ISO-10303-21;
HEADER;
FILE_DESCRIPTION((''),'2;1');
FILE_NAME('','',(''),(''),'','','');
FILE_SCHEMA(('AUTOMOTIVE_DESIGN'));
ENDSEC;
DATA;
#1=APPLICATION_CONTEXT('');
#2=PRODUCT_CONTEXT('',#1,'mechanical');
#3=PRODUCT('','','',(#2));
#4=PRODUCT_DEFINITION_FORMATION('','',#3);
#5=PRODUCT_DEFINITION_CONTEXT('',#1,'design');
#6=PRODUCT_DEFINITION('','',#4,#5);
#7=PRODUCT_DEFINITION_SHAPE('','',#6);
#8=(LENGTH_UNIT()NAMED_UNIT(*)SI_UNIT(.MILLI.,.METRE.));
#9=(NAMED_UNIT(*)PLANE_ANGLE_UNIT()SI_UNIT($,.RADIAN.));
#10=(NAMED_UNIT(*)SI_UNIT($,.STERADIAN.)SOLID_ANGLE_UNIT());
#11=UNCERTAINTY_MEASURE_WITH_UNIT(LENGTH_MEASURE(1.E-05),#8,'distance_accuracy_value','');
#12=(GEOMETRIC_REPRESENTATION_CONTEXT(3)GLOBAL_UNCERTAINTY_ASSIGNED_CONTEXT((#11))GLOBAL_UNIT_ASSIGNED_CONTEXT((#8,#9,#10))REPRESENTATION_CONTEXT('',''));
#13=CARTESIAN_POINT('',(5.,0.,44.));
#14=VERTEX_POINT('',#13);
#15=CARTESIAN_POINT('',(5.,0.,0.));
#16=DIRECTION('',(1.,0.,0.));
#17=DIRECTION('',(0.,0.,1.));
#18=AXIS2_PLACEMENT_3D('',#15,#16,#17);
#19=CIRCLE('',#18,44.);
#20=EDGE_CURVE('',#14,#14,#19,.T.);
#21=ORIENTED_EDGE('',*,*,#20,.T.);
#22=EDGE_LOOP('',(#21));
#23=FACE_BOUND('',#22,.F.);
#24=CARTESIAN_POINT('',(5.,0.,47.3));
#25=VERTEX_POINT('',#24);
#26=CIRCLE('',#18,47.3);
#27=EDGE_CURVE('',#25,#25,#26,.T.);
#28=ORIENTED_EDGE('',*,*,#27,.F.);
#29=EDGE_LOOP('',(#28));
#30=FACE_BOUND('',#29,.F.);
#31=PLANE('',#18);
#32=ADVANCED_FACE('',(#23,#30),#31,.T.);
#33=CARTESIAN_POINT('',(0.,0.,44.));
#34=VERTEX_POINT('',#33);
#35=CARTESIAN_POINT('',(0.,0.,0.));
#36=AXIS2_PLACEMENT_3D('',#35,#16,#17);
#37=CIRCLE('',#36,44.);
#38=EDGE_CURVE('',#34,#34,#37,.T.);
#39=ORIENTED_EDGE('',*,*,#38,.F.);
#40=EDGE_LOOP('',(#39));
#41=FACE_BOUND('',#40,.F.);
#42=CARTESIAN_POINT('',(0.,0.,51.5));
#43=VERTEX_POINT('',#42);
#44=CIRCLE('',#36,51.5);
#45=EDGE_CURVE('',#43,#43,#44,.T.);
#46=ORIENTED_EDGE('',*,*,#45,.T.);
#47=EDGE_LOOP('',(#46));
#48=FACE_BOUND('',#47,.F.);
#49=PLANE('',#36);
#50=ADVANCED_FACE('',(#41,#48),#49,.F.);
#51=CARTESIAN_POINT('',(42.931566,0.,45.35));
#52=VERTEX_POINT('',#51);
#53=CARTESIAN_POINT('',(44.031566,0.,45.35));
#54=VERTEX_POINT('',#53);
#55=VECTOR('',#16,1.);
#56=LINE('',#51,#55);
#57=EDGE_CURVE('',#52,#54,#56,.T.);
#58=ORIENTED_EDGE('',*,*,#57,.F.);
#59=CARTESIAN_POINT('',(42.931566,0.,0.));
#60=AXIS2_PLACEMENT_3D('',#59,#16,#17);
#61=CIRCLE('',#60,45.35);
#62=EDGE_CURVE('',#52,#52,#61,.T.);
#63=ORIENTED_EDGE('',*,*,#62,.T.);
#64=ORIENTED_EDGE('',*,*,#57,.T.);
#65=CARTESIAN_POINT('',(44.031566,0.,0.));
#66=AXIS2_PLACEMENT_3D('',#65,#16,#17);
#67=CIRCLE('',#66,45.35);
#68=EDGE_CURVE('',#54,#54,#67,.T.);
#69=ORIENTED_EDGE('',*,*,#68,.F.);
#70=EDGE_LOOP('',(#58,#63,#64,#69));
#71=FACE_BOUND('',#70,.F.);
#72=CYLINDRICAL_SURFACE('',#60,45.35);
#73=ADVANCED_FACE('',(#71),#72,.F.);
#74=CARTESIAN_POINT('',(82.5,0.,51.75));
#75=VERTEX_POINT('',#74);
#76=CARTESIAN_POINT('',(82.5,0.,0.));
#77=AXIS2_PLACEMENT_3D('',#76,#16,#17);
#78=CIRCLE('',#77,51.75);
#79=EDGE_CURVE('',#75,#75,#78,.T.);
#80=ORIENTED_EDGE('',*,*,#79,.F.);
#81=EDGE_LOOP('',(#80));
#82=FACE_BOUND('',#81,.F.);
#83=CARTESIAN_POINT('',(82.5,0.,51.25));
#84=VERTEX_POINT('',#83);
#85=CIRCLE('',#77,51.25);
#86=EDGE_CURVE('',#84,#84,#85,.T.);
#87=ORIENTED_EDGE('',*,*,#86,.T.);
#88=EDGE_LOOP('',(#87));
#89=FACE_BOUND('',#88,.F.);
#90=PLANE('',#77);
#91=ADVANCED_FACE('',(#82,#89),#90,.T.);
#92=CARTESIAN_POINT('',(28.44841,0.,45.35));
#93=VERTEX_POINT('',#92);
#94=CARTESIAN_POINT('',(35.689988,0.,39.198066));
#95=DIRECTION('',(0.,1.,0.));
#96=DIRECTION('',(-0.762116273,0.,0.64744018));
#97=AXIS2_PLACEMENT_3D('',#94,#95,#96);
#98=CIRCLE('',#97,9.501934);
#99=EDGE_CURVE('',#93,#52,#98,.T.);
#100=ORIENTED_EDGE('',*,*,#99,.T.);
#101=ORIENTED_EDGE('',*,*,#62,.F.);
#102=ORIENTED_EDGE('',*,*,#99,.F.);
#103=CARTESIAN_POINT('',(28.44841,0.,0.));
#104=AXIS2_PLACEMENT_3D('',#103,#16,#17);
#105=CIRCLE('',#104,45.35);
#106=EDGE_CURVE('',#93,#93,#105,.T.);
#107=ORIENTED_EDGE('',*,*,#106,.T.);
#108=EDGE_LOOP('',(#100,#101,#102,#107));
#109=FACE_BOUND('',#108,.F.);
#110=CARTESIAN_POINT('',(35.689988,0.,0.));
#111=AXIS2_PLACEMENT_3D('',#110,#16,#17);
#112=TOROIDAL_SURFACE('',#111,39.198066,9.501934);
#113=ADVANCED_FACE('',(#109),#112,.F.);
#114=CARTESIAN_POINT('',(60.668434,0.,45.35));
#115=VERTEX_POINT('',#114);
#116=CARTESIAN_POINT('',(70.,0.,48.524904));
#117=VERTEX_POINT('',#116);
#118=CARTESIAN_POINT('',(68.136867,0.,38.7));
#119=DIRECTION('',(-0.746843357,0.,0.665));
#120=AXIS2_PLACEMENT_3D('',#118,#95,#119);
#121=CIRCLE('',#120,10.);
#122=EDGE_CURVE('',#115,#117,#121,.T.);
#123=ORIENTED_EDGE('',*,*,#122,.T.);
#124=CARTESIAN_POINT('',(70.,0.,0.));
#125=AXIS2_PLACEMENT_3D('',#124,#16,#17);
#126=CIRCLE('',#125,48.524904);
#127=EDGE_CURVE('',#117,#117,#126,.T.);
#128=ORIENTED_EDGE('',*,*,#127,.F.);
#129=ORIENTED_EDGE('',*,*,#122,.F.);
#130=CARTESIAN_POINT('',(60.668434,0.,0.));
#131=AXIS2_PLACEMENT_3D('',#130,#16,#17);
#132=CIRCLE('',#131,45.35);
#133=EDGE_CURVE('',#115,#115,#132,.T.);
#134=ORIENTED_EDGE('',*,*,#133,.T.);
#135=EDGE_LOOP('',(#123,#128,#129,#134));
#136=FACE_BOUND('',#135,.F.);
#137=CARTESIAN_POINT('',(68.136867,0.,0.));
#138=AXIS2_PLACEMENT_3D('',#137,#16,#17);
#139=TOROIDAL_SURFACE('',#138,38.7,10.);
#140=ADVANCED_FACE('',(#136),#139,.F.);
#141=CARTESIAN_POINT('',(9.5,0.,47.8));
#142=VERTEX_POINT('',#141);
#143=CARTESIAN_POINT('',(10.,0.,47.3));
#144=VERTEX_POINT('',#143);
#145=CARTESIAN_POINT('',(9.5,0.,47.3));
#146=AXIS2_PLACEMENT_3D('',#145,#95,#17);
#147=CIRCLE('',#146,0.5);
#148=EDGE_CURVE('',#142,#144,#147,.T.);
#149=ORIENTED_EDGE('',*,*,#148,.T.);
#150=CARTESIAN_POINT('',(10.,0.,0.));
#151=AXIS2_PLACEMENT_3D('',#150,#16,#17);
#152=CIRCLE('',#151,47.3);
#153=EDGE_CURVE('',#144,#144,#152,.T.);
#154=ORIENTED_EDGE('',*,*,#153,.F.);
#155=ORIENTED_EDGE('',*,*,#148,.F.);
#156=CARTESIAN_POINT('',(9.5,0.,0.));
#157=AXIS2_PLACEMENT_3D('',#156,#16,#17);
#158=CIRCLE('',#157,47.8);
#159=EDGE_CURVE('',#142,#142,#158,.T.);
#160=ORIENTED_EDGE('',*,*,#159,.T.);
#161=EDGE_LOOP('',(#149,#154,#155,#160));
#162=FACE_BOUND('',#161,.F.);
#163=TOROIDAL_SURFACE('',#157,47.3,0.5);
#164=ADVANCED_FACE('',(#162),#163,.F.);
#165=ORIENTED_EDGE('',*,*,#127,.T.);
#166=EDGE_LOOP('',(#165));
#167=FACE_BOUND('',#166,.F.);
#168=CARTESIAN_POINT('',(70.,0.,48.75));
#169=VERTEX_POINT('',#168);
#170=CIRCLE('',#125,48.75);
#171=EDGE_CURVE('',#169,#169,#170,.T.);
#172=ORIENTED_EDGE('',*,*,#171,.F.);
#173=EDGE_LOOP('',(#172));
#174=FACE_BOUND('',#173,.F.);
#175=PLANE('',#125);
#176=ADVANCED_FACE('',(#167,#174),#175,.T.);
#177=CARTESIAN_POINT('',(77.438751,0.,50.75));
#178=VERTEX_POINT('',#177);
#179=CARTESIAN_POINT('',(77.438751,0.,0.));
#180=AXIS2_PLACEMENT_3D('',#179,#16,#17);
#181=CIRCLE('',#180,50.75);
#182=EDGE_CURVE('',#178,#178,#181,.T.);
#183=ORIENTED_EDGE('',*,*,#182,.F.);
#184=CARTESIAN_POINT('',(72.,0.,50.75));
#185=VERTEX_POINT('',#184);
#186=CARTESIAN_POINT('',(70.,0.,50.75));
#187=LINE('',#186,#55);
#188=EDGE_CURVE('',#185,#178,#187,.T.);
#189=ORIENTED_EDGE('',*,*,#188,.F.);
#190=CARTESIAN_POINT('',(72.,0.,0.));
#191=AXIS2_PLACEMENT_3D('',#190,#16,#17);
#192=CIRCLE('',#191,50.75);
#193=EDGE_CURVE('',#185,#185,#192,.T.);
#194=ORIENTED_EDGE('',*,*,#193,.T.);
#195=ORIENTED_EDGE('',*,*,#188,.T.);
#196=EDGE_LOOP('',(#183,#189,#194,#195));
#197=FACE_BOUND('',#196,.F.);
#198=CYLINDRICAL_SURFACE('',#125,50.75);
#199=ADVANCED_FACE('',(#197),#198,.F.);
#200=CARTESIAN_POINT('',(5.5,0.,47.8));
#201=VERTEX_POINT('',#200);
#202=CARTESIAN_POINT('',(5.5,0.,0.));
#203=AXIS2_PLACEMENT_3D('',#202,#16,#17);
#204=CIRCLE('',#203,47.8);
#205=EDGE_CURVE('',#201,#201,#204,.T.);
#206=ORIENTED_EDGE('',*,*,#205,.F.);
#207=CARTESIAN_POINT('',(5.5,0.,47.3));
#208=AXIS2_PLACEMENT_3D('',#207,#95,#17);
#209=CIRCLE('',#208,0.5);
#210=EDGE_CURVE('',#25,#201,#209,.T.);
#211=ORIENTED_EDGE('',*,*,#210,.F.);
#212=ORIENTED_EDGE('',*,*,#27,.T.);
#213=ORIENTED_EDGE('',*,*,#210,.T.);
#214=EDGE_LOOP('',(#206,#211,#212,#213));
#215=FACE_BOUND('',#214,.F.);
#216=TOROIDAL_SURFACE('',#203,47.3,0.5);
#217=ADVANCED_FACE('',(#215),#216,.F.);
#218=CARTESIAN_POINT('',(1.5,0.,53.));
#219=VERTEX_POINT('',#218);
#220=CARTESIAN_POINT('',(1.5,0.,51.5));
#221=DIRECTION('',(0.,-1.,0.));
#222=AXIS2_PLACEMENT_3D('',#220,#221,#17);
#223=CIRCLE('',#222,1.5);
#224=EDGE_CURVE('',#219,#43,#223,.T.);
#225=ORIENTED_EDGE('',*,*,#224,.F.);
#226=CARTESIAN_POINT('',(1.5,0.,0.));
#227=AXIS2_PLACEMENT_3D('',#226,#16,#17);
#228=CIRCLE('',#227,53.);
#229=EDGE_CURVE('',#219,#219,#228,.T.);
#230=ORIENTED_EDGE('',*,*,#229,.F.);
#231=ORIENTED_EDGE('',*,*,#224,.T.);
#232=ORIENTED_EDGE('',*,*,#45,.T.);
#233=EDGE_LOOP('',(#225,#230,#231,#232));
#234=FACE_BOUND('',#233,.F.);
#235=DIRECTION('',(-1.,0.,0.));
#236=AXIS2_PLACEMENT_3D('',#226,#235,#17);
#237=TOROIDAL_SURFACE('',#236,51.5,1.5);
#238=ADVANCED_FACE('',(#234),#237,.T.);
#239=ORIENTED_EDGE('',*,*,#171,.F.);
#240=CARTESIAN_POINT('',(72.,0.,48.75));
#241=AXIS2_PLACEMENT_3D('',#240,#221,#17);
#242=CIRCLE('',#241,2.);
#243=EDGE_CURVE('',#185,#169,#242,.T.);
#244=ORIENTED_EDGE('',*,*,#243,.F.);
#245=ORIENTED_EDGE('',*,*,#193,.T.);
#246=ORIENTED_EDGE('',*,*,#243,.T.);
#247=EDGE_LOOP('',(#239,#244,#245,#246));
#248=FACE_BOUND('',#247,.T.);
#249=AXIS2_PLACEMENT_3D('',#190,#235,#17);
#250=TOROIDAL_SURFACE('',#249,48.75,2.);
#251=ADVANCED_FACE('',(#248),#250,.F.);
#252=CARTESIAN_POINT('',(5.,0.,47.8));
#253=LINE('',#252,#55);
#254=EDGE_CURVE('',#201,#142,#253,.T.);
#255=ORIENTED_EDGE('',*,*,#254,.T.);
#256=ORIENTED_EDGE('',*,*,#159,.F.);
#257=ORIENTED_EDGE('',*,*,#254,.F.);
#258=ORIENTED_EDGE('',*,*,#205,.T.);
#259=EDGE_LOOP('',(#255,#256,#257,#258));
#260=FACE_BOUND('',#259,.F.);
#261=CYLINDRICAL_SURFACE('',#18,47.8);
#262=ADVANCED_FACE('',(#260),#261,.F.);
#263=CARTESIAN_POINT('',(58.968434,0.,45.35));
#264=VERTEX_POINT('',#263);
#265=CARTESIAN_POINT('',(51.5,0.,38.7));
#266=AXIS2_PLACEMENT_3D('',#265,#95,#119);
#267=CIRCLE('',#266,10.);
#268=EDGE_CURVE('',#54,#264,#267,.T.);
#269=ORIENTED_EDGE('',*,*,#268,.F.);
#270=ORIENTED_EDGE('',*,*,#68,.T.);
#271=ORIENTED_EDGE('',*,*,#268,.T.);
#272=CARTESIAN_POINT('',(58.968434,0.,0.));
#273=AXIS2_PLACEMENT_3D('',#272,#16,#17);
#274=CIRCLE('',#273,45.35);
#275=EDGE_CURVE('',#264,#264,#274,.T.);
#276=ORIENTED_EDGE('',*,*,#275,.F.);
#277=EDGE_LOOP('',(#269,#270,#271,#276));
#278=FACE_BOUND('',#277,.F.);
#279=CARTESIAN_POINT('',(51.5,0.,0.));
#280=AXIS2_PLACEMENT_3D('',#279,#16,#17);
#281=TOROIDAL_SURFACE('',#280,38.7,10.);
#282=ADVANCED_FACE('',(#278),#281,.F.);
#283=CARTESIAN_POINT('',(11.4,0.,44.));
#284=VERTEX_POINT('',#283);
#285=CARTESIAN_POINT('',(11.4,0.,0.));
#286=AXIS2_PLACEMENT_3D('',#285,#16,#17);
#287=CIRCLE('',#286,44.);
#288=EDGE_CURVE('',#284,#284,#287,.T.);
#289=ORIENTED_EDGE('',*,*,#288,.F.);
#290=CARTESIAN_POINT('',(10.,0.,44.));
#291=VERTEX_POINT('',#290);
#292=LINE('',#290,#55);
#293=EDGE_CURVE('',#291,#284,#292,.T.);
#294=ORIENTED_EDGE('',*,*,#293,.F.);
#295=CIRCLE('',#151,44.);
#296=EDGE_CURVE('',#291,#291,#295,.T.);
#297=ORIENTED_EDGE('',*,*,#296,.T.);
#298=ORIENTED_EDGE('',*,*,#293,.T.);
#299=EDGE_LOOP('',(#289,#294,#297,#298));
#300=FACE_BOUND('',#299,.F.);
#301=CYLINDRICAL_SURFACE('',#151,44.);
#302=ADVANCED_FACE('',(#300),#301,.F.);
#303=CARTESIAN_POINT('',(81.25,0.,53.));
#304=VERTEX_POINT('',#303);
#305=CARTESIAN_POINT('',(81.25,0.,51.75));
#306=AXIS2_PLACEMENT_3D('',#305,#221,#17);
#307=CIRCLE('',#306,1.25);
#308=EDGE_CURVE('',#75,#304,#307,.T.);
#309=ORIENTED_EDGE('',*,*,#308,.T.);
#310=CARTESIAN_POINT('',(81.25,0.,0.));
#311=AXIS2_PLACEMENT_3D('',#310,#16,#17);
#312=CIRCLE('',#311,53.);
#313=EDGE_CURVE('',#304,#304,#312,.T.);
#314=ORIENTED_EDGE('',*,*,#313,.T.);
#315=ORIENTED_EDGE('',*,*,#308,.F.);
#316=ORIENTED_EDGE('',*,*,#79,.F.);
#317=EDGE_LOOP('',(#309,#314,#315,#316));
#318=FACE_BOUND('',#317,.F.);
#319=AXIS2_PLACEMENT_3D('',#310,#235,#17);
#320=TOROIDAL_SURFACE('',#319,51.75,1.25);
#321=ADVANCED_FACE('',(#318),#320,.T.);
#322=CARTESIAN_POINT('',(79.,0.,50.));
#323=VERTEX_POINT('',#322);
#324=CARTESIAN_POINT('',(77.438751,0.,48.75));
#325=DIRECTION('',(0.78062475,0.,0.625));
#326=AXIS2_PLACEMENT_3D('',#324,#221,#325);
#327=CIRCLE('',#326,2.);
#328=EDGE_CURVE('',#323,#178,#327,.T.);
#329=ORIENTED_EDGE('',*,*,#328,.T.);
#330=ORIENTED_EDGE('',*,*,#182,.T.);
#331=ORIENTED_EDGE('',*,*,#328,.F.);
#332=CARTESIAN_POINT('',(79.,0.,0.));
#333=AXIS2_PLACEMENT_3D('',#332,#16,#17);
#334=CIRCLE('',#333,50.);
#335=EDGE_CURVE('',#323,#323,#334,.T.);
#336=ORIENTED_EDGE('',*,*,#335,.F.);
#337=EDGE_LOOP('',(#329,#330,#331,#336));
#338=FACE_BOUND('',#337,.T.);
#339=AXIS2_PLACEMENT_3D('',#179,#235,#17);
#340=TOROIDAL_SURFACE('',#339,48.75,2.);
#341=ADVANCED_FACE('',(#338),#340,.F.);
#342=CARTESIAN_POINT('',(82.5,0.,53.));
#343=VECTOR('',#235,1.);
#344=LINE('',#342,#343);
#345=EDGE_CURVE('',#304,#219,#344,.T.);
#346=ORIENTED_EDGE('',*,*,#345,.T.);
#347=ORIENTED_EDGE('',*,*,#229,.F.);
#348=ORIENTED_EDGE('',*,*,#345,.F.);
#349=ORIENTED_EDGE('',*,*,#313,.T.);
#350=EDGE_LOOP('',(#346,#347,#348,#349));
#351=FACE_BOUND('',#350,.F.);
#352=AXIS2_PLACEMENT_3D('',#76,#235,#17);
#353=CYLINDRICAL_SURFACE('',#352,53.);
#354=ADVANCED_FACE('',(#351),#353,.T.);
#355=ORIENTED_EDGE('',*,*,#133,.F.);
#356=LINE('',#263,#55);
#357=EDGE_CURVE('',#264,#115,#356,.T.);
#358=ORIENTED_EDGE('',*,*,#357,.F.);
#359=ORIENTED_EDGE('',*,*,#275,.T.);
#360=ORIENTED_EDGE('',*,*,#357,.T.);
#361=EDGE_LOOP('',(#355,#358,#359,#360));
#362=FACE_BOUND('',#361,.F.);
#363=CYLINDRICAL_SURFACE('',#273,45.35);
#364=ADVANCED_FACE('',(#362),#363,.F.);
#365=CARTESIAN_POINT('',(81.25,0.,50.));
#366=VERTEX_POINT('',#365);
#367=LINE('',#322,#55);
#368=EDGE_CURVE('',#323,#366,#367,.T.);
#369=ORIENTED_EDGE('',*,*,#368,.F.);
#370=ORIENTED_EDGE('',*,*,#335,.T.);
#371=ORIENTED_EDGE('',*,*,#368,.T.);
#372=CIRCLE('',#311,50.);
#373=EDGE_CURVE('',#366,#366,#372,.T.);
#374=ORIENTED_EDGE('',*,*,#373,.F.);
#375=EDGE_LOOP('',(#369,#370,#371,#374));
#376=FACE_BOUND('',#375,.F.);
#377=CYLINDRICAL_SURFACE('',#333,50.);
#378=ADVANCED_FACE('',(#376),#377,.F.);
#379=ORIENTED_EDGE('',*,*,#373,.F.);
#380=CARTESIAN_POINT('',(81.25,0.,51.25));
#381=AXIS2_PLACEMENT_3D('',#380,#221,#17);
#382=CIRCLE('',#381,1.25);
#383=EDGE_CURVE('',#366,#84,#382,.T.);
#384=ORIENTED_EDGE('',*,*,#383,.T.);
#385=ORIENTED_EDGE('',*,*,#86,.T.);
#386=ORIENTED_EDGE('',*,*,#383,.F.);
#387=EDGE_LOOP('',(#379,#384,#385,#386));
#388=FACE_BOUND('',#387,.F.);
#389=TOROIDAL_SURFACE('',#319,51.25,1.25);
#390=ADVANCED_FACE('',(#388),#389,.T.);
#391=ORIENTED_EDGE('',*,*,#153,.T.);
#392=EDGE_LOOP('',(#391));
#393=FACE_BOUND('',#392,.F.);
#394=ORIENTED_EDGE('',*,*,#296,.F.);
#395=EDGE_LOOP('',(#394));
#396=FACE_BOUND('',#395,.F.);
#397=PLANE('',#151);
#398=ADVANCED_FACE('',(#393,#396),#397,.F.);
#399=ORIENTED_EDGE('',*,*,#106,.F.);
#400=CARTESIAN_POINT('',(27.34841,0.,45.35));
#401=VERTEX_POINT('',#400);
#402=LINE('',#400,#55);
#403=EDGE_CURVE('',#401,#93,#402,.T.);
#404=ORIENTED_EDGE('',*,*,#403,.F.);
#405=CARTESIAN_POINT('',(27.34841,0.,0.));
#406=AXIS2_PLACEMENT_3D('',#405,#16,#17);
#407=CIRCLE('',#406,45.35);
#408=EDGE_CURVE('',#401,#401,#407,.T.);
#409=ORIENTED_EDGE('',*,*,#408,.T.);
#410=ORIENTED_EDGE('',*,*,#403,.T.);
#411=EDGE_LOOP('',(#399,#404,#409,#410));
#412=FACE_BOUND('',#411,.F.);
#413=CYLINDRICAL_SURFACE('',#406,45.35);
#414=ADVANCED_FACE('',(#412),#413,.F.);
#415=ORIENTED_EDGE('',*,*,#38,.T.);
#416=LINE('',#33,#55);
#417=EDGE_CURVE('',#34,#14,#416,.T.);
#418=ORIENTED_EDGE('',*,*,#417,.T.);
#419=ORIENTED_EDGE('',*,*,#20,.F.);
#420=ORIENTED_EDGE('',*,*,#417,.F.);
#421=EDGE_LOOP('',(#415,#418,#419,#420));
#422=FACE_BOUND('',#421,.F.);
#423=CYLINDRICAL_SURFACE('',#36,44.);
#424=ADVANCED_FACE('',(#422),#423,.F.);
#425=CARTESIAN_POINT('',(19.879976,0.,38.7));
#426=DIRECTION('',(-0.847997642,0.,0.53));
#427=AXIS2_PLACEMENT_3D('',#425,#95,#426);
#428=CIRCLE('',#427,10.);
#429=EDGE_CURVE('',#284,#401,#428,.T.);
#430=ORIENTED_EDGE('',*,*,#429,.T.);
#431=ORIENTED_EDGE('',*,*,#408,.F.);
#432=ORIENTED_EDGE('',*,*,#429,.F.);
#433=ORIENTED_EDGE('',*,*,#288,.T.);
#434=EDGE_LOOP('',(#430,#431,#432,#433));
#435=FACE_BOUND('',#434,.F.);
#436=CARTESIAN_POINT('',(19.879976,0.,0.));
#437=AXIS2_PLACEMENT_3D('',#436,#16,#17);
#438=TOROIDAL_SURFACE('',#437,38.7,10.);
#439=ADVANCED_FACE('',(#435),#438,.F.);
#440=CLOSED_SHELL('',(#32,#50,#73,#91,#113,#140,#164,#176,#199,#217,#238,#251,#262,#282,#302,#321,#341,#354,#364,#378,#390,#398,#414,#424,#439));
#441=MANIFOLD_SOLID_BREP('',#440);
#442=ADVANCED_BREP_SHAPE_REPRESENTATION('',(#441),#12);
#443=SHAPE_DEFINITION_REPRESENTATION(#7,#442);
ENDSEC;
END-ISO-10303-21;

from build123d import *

# Parameters (mm, degrees)
F2_R = 0.5
F4_R = 1.25
F5_R = 1.5


# Not quite as in the source:
# - a fillet or chamfer that OpenCascade refuses, or shapes differently, is made with other operations: its cross-section is extruded or revolved along the edge and cut away or added


with BuildPart() as f1:
    # F0 (on Front) → F1 (revolve)
    with BuildSketch(Plane.XZ):
        with BuildLine():
            Line((82.5, 50), (82.5, 53))
            Line((82.5, 53), (0, 53))
            Line((0, 53), (0, 44))
            Line((0, 44), (5, 44))
            Line((5, 44), (5, 47.8))
            Line((5, 47.8), (10, 47.8))
            Line((10, 47.8), (10, 44))
            Line((10, 44), (11.4, 44))
            ThreePointArc((11.4, 44), (19.0365134749, 48.6643650208), (27.3484099858, 45.35))
            Line((27.3484099858, 45.35), (28.4484099858, 45.35))
            ThreePointArc((28.4484099858, 45.35), (35.6899882075, 48.7), (42.9315664293, 45.35))
            Line((42.9315664293, 45.35), (44.0315664293, 45.35))
            ThreePointArc((44.0315664293, 45.35), (51.5, 48.7), (58.9684335707, 45.35))
            Line((58.9684335707, 45.35), (60.6684335707, 45.35))
            ThreePointArc((60.6684335707, 45.35), (64.9158653321, 48.1670558963), (70, 48.5249038647))
            Line((70, 48.5249038647), (70, 50.75))
            Line((70, 50.75), (79, 50.75))
            Line((79, 50.75), (79, 50))
            Line((79, 50), (82.5, 50))
        make_face()
    revolve(axis=Axis((2.4749229779, 0, 0), (1, 0, 0)))

    # F2
    f2_edges = [f1.edges().sort_by_distance(p)[0] for p in [
        (5, 0, -47.8),
        (10, 0, -47.8),
    ]]
    fillet(f2_edges, radius=F2_R)

    # F3: fillet of radius 2 on 2 edges, made by hand

    # F3_s1 → F3_t2 (revolve)
    with BuildSketch(Plane.XZ):
        with BuildLine():
            ThreePointArc((72, 50.75), (70.5857864376, 50.1642135624), (70, 48.75))
            Line((70, 48.75), (70, 50.75))
            Line((70, 50.75), (72, 50.75))
        make_face()
    revolve(axis=Axis((70, 0, 0), (1, 0, 0)))

    # F3_s3 → F3_t4 (revolve)
    with BuildSketch(Plane.XZ):
        with BuildLine():
            ThreePointArc((79, 50), (78.3047759042, 50.5527756377), (77.4387505004, 50.75))
            Line((77.4387505004, 50.75), (79, 50.75))
            Line((79, 50.75), (79, 50))
        make_face()
    revolve(axis=Axis((79, 0, 0), (1, 0, 0)))

    # F4
    f4_edges = [f1.edges().sort_by_distance(p)[0] for p in [
        (82.5, 0, -53),
        (82.5, 0, -50),
    ]]
    fillet(f4_edges, radius=F4_R)

    # F5
    f5_edges = [f1.edges().sort_by_distance(p)[0] for p in [
        (0, 0, -53),
    ]]
    fillet(f5_edges, radius=F5_R)


solid = f1.part
